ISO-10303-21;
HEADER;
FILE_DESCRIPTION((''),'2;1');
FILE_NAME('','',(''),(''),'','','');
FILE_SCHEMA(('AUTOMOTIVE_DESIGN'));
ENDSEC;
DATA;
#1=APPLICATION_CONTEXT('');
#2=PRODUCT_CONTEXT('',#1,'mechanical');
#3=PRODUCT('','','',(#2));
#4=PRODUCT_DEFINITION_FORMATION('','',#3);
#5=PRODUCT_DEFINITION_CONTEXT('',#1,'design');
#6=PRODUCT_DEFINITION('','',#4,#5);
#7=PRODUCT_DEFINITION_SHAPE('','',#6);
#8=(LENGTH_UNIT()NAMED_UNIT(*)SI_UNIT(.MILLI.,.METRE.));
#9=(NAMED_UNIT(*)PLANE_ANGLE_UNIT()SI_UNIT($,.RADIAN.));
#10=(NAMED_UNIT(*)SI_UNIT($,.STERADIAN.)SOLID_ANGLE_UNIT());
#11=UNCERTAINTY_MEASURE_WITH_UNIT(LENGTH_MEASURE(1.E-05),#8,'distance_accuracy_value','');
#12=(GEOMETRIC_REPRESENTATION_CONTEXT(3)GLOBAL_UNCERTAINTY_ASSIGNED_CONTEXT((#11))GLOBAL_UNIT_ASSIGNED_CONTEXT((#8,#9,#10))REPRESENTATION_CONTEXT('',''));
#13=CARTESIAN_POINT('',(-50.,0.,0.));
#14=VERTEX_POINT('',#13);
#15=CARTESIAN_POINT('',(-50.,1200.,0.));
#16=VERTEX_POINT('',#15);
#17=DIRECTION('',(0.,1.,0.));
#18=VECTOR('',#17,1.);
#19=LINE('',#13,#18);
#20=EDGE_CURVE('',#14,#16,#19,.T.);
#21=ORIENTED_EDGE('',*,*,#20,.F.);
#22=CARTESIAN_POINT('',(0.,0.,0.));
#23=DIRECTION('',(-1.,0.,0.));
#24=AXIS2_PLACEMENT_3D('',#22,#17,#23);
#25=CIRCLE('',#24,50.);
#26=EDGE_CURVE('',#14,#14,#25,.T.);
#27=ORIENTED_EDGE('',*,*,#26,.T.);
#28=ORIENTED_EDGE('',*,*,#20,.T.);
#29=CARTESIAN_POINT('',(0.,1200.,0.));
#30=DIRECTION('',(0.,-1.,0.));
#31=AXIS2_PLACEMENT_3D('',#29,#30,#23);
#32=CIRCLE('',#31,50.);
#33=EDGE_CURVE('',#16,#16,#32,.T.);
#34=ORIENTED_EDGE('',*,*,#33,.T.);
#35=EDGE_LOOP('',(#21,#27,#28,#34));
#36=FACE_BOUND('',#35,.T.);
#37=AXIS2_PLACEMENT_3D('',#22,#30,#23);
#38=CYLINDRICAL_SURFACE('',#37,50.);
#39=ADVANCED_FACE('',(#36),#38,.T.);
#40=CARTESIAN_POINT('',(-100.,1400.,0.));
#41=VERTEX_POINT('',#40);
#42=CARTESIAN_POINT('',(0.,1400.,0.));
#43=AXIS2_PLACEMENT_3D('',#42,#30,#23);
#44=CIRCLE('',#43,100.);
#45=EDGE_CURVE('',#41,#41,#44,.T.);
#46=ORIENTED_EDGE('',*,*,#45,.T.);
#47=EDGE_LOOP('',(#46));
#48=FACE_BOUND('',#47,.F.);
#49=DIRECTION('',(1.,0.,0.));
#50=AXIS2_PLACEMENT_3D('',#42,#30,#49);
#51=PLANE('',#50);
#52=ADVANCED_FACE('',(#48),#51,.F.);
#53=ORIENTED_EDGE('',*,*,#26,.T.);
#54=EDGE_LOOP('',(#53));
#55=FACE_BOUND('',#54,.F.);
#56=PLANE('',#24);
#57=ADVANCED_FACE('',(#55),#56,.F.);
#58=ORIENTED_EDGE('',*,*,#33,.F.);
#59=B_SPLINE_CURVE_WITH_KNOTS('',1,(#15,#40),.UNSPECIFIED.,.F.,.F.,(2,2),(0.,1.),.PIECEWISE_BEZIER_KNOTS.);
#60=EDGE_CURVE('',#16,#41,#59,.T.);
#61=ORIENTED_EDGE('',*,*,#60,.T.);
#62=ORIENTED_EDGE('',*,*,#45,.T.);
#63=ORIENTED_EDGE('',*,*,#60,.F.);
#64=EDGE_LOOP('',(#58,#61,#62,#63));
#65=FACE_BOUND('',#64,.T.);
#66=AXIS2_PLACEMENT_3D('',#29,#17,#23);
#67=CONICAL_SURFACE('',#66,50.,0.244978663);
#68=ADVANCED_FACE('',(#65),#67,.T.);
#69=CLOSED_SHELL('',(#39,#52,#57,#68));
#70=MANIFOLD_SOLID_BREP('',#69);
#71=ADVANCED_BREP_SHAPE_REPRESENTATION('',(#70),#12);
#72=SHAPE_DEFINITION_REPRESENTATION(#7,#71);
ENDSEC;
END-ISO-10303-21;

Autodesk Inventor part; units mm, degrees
ref_plane "YZ Plane" through (0, 0, 0) normal (1, 0, 0) x (0, 1, 0)
ref_plane "XZ Plane" through (0, 0, 0) normal (0, 1, 0) x (-1, 0, 0)
ref_plane "XY Plane" through (0, 0, 0) normal (0, 0, 1) x (1, 0, 0)
sketch "Sketch1" plane through (0, 0, 0) normal (0, 1, 0) x (-1, 0, 0)
  circle A0 centre (0, 0) radius 50
  dimension "d0" = 100
extrude "Extrusion1" add sketch "Sketch1" along normal blind 1200
ref_plane "Work Plane1" through (0, 1400, 0) normal (0, -1, 0) x (1, 0, 0)
sketch "Sketch2" plane through (0, 1400, 0) normal (0, -1, 0) x (1, 0, 0)
  circle A0 centre (0, 0) radius 100
  dimension "d4" = 200
loft "Loft1" add profiles "Sketch2" section 1 edges at (50, 1200, 0)
properties part number "ramie"
